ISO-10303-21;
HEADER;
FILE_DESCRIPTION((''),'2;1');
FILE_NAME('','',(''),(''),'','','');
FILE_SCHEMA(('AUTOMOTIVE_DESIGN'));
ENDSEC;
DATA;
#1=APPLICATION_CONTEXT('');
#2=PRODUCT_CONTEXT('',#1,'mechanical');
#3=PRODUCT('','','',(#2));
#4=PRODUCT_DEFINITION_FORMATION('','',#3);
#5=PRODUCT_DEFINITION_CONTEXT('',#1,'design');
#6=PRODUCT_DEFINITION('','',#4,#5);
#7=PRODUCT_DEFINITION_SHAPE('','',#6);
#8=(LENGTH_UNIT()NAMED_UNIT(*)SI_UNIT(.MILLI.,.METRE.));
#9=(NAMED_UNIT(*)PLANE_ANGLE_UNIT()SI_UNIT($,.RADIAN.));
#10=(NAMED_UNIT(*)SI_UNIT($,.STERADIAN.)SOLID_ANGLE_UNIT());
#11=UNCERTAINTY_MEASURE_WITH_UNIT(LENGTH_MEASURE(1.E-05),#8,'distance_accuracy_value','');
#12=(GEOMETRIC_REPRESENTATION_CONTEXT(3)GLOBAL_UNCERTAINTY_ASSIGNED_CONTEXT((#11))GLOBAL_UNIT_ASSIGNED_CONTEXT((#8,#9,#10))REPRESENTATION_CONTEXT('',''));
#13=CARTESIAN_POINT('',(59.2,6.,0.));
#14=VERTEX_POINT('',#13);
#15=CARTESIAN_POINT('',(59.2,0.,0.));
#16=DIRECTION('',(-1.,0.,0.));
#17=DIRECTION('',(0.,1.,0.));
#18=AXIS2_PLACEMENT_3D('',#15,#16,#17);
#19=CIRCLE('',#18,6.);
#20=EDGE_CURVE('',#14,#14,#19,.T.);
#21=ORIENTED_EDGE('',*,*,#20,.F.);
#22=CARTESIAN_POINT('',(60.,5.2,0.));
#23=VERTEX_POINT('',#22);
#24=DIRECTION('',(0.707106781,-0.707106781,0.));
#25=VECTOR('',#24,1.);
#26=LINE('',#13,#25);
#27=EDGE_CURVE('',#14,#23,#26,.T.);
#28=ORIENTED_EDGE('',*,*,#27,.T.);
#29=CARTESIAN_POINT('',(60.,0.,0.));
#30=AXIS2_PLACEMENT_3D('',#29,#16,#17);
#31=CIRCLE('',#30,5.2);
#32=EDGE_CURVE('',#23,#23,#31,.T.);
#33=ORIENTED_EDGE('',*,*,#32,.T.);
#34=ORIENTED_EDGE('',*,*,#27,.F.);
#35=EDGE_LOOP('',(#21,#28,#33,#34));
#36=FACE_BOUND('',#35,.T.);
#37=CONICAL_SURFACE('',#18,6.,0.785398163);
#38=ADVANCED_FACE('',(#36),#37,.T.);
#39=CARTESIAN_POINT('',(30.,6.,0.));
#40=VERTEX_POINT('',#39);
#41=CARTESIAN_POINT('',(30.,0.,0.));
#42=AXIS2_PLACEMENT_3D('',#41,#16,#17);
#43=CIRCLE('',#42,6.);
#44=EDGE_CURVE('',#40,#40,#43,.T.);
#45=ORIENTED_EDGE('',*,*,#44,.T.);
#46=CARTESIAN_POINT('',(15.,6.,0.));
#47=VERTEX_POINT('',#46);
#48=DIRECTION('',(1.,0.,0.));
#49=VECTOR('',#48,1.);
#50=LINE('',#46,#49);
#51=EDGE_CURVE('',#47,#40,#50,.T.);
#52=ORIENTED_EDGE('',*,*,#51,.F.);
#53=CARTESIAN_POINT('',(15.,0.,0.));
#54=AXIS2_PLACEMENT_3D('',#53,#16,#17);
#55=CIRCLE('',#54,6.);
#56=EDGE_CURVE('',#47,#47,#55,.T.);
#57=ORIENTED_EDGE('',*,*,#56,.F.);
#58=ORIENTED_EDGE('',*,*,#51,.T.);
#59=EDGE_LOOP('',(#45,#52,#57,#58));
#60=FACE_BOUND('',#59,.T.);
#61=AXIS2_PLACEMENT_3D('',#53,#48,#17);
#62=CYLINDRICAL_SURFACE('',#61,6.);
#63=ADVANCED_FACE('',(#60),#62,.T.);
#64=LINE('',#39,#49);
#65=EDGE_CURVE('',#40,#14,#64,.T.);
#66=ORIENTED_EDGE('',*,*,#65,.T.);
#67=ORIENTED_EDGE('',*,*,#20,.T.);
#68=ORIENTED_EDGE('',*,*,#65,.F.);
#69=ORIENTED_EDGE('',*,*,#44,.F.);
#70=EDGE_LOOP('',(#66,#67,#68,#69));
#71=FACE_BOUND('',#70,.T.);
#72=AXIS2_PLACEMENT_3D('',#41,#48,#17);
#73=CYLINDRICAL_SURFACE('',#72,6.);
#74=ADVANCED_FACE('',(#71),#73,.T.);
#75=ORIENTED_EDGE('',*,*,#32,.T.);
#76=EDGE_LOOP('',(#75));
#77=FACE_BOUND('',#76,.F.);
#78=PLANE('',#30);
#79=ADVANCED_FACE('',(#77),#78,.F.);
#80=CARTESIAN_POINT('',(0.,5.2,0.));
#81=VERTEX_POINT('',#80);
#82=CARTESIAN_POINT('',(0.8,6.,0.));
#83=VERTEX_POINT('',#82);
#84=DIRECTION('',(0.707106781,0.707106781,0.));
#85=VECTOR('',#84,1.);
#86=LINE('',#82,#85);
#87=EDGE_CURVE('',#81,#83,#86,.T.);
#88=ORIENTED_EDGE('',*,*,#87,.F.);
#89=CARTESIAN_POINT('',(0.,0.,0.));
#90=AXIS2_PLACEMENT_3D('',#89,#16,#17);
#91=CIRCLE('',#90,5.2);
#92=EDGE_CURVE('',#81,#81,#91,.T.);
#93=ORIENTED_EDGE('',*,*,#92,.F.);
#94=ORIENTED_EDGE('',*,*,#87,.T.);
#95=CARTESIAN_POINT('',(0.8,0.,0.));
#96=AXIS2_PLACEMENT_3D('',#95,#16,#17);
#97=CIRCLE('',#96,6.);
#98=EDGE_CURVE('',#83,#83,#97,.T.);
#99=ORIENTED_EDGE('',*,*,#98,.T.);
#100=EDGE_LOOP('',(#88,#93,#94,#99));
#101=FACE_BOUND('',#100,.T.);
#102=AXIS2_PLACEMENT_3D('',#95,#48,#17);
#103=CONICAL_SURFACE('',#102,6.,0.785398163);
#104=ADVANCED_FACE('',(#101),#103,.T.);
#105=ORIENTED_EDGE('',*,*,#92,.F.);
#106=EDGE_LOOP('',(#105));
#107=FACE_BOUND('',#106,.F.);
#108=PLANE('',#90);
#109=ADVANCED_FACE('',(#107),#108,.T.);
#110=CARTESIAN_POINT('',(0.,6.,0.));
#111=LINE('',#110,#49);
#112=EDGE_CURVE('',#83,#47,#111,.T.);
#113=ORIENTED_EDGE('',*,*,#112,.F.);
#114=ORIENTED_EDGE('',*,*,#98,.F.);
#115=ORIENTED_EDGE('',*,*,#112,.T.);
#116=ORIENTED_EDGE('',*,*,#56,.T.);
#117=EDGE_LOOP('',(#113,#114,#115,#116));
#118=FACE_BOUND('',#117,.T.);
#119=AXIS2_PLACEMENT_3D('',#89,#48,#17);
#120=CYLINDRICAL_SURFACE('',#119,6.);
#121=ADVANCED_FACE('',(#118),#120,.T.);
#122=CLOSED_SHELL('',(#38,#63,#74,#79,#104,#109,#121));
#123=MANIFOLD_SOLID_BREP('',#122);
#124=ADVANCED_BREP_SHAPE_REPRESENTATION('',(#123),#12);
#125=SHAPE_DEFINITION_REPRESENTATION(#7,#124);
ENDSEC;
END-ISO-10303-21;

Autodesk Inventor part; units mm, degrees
ref_plane "YZ Plane" through (0, 0, 0) normal (1, 0, 0) x (0, 1, 0)
ref_plane "XZ Plane" through (0, 0, 0) normal (0, 1, 0) x (-1, 0, 0)
sketch "Sketch1" plane through (0, 0, 0) normal (0, 0, 1) x (1, 0, 0)
  line L0 (0, 0) -> (0, 6)
  line L1 (0, 6) -> (15, 6)
  line L2 (15, 6) -> (15, 6)
  line L3 (15, 6) -> (30, 6)
  line L4 (30, 6) -> (30, 6)
  line L5 (30, 6) -> (60, 6)
  line L6 (60, 6) -> (60, 0)
  line L7 (60, 0) -> (0, 0)
  dimension "d1" = 12
  dimension "d3" = 12
  dimension "d4" = 15
  dimension "d5" = 45
  dimension "d6" = 30
revolve "Revolution1" add sketch "Sketch1" angle 360 about axis through (60, 0, 0) along (-1, 0, 0)
thread "Thread1" size "M12x1.75" class "6g" standard "ISO Metric profile" length 15
thread "Thread2" size "M12x1.75" class "6g" standard "ISO Metric profile" length 30
chamfer "Chamfer1" distance 0.8 angle 45 2 edges at (60, -6, 0) (0, -6, 0)
ref_plane "Work Plane1" through (15, 0, 0) normal (1, 0, 0) x (0, 1, 0)
sketch "Sketch2" plane through (15, 0, 0) normal (1, 0, 0) x (0, 1, 0)
  circle A0 centre (0, 0) radius 6
  point P0 (0, 0)
  dimension "d29" = 12
boundary_patch "Boundary Patch1"
equation "\"d8\" = d4"
equation "\"d23\" = b"
equation "\"d25\" = chamfer"
equation "\"d1\" = d"
equation "\"d3\" = d1_"
equation "\"d4\" = b1"
equation "\"d5\" = L"
equation "\"d6\" = b"
equation "\"d29\" = d"
equation "\"chamfer\" = 0.8"
equation "\"d\" = 12"
equation "\"d1_\" = 12"
equation "\"b1\" = 15"
equation "\"L\" = 45"
equation "\"b\" = 30"
equation "\"d28\" = -b1"
equation "\"Grip_Length\" = 15"
properties part number "Stud M12-6g×45 GOST 22034-76" material "Steel, Mild"
